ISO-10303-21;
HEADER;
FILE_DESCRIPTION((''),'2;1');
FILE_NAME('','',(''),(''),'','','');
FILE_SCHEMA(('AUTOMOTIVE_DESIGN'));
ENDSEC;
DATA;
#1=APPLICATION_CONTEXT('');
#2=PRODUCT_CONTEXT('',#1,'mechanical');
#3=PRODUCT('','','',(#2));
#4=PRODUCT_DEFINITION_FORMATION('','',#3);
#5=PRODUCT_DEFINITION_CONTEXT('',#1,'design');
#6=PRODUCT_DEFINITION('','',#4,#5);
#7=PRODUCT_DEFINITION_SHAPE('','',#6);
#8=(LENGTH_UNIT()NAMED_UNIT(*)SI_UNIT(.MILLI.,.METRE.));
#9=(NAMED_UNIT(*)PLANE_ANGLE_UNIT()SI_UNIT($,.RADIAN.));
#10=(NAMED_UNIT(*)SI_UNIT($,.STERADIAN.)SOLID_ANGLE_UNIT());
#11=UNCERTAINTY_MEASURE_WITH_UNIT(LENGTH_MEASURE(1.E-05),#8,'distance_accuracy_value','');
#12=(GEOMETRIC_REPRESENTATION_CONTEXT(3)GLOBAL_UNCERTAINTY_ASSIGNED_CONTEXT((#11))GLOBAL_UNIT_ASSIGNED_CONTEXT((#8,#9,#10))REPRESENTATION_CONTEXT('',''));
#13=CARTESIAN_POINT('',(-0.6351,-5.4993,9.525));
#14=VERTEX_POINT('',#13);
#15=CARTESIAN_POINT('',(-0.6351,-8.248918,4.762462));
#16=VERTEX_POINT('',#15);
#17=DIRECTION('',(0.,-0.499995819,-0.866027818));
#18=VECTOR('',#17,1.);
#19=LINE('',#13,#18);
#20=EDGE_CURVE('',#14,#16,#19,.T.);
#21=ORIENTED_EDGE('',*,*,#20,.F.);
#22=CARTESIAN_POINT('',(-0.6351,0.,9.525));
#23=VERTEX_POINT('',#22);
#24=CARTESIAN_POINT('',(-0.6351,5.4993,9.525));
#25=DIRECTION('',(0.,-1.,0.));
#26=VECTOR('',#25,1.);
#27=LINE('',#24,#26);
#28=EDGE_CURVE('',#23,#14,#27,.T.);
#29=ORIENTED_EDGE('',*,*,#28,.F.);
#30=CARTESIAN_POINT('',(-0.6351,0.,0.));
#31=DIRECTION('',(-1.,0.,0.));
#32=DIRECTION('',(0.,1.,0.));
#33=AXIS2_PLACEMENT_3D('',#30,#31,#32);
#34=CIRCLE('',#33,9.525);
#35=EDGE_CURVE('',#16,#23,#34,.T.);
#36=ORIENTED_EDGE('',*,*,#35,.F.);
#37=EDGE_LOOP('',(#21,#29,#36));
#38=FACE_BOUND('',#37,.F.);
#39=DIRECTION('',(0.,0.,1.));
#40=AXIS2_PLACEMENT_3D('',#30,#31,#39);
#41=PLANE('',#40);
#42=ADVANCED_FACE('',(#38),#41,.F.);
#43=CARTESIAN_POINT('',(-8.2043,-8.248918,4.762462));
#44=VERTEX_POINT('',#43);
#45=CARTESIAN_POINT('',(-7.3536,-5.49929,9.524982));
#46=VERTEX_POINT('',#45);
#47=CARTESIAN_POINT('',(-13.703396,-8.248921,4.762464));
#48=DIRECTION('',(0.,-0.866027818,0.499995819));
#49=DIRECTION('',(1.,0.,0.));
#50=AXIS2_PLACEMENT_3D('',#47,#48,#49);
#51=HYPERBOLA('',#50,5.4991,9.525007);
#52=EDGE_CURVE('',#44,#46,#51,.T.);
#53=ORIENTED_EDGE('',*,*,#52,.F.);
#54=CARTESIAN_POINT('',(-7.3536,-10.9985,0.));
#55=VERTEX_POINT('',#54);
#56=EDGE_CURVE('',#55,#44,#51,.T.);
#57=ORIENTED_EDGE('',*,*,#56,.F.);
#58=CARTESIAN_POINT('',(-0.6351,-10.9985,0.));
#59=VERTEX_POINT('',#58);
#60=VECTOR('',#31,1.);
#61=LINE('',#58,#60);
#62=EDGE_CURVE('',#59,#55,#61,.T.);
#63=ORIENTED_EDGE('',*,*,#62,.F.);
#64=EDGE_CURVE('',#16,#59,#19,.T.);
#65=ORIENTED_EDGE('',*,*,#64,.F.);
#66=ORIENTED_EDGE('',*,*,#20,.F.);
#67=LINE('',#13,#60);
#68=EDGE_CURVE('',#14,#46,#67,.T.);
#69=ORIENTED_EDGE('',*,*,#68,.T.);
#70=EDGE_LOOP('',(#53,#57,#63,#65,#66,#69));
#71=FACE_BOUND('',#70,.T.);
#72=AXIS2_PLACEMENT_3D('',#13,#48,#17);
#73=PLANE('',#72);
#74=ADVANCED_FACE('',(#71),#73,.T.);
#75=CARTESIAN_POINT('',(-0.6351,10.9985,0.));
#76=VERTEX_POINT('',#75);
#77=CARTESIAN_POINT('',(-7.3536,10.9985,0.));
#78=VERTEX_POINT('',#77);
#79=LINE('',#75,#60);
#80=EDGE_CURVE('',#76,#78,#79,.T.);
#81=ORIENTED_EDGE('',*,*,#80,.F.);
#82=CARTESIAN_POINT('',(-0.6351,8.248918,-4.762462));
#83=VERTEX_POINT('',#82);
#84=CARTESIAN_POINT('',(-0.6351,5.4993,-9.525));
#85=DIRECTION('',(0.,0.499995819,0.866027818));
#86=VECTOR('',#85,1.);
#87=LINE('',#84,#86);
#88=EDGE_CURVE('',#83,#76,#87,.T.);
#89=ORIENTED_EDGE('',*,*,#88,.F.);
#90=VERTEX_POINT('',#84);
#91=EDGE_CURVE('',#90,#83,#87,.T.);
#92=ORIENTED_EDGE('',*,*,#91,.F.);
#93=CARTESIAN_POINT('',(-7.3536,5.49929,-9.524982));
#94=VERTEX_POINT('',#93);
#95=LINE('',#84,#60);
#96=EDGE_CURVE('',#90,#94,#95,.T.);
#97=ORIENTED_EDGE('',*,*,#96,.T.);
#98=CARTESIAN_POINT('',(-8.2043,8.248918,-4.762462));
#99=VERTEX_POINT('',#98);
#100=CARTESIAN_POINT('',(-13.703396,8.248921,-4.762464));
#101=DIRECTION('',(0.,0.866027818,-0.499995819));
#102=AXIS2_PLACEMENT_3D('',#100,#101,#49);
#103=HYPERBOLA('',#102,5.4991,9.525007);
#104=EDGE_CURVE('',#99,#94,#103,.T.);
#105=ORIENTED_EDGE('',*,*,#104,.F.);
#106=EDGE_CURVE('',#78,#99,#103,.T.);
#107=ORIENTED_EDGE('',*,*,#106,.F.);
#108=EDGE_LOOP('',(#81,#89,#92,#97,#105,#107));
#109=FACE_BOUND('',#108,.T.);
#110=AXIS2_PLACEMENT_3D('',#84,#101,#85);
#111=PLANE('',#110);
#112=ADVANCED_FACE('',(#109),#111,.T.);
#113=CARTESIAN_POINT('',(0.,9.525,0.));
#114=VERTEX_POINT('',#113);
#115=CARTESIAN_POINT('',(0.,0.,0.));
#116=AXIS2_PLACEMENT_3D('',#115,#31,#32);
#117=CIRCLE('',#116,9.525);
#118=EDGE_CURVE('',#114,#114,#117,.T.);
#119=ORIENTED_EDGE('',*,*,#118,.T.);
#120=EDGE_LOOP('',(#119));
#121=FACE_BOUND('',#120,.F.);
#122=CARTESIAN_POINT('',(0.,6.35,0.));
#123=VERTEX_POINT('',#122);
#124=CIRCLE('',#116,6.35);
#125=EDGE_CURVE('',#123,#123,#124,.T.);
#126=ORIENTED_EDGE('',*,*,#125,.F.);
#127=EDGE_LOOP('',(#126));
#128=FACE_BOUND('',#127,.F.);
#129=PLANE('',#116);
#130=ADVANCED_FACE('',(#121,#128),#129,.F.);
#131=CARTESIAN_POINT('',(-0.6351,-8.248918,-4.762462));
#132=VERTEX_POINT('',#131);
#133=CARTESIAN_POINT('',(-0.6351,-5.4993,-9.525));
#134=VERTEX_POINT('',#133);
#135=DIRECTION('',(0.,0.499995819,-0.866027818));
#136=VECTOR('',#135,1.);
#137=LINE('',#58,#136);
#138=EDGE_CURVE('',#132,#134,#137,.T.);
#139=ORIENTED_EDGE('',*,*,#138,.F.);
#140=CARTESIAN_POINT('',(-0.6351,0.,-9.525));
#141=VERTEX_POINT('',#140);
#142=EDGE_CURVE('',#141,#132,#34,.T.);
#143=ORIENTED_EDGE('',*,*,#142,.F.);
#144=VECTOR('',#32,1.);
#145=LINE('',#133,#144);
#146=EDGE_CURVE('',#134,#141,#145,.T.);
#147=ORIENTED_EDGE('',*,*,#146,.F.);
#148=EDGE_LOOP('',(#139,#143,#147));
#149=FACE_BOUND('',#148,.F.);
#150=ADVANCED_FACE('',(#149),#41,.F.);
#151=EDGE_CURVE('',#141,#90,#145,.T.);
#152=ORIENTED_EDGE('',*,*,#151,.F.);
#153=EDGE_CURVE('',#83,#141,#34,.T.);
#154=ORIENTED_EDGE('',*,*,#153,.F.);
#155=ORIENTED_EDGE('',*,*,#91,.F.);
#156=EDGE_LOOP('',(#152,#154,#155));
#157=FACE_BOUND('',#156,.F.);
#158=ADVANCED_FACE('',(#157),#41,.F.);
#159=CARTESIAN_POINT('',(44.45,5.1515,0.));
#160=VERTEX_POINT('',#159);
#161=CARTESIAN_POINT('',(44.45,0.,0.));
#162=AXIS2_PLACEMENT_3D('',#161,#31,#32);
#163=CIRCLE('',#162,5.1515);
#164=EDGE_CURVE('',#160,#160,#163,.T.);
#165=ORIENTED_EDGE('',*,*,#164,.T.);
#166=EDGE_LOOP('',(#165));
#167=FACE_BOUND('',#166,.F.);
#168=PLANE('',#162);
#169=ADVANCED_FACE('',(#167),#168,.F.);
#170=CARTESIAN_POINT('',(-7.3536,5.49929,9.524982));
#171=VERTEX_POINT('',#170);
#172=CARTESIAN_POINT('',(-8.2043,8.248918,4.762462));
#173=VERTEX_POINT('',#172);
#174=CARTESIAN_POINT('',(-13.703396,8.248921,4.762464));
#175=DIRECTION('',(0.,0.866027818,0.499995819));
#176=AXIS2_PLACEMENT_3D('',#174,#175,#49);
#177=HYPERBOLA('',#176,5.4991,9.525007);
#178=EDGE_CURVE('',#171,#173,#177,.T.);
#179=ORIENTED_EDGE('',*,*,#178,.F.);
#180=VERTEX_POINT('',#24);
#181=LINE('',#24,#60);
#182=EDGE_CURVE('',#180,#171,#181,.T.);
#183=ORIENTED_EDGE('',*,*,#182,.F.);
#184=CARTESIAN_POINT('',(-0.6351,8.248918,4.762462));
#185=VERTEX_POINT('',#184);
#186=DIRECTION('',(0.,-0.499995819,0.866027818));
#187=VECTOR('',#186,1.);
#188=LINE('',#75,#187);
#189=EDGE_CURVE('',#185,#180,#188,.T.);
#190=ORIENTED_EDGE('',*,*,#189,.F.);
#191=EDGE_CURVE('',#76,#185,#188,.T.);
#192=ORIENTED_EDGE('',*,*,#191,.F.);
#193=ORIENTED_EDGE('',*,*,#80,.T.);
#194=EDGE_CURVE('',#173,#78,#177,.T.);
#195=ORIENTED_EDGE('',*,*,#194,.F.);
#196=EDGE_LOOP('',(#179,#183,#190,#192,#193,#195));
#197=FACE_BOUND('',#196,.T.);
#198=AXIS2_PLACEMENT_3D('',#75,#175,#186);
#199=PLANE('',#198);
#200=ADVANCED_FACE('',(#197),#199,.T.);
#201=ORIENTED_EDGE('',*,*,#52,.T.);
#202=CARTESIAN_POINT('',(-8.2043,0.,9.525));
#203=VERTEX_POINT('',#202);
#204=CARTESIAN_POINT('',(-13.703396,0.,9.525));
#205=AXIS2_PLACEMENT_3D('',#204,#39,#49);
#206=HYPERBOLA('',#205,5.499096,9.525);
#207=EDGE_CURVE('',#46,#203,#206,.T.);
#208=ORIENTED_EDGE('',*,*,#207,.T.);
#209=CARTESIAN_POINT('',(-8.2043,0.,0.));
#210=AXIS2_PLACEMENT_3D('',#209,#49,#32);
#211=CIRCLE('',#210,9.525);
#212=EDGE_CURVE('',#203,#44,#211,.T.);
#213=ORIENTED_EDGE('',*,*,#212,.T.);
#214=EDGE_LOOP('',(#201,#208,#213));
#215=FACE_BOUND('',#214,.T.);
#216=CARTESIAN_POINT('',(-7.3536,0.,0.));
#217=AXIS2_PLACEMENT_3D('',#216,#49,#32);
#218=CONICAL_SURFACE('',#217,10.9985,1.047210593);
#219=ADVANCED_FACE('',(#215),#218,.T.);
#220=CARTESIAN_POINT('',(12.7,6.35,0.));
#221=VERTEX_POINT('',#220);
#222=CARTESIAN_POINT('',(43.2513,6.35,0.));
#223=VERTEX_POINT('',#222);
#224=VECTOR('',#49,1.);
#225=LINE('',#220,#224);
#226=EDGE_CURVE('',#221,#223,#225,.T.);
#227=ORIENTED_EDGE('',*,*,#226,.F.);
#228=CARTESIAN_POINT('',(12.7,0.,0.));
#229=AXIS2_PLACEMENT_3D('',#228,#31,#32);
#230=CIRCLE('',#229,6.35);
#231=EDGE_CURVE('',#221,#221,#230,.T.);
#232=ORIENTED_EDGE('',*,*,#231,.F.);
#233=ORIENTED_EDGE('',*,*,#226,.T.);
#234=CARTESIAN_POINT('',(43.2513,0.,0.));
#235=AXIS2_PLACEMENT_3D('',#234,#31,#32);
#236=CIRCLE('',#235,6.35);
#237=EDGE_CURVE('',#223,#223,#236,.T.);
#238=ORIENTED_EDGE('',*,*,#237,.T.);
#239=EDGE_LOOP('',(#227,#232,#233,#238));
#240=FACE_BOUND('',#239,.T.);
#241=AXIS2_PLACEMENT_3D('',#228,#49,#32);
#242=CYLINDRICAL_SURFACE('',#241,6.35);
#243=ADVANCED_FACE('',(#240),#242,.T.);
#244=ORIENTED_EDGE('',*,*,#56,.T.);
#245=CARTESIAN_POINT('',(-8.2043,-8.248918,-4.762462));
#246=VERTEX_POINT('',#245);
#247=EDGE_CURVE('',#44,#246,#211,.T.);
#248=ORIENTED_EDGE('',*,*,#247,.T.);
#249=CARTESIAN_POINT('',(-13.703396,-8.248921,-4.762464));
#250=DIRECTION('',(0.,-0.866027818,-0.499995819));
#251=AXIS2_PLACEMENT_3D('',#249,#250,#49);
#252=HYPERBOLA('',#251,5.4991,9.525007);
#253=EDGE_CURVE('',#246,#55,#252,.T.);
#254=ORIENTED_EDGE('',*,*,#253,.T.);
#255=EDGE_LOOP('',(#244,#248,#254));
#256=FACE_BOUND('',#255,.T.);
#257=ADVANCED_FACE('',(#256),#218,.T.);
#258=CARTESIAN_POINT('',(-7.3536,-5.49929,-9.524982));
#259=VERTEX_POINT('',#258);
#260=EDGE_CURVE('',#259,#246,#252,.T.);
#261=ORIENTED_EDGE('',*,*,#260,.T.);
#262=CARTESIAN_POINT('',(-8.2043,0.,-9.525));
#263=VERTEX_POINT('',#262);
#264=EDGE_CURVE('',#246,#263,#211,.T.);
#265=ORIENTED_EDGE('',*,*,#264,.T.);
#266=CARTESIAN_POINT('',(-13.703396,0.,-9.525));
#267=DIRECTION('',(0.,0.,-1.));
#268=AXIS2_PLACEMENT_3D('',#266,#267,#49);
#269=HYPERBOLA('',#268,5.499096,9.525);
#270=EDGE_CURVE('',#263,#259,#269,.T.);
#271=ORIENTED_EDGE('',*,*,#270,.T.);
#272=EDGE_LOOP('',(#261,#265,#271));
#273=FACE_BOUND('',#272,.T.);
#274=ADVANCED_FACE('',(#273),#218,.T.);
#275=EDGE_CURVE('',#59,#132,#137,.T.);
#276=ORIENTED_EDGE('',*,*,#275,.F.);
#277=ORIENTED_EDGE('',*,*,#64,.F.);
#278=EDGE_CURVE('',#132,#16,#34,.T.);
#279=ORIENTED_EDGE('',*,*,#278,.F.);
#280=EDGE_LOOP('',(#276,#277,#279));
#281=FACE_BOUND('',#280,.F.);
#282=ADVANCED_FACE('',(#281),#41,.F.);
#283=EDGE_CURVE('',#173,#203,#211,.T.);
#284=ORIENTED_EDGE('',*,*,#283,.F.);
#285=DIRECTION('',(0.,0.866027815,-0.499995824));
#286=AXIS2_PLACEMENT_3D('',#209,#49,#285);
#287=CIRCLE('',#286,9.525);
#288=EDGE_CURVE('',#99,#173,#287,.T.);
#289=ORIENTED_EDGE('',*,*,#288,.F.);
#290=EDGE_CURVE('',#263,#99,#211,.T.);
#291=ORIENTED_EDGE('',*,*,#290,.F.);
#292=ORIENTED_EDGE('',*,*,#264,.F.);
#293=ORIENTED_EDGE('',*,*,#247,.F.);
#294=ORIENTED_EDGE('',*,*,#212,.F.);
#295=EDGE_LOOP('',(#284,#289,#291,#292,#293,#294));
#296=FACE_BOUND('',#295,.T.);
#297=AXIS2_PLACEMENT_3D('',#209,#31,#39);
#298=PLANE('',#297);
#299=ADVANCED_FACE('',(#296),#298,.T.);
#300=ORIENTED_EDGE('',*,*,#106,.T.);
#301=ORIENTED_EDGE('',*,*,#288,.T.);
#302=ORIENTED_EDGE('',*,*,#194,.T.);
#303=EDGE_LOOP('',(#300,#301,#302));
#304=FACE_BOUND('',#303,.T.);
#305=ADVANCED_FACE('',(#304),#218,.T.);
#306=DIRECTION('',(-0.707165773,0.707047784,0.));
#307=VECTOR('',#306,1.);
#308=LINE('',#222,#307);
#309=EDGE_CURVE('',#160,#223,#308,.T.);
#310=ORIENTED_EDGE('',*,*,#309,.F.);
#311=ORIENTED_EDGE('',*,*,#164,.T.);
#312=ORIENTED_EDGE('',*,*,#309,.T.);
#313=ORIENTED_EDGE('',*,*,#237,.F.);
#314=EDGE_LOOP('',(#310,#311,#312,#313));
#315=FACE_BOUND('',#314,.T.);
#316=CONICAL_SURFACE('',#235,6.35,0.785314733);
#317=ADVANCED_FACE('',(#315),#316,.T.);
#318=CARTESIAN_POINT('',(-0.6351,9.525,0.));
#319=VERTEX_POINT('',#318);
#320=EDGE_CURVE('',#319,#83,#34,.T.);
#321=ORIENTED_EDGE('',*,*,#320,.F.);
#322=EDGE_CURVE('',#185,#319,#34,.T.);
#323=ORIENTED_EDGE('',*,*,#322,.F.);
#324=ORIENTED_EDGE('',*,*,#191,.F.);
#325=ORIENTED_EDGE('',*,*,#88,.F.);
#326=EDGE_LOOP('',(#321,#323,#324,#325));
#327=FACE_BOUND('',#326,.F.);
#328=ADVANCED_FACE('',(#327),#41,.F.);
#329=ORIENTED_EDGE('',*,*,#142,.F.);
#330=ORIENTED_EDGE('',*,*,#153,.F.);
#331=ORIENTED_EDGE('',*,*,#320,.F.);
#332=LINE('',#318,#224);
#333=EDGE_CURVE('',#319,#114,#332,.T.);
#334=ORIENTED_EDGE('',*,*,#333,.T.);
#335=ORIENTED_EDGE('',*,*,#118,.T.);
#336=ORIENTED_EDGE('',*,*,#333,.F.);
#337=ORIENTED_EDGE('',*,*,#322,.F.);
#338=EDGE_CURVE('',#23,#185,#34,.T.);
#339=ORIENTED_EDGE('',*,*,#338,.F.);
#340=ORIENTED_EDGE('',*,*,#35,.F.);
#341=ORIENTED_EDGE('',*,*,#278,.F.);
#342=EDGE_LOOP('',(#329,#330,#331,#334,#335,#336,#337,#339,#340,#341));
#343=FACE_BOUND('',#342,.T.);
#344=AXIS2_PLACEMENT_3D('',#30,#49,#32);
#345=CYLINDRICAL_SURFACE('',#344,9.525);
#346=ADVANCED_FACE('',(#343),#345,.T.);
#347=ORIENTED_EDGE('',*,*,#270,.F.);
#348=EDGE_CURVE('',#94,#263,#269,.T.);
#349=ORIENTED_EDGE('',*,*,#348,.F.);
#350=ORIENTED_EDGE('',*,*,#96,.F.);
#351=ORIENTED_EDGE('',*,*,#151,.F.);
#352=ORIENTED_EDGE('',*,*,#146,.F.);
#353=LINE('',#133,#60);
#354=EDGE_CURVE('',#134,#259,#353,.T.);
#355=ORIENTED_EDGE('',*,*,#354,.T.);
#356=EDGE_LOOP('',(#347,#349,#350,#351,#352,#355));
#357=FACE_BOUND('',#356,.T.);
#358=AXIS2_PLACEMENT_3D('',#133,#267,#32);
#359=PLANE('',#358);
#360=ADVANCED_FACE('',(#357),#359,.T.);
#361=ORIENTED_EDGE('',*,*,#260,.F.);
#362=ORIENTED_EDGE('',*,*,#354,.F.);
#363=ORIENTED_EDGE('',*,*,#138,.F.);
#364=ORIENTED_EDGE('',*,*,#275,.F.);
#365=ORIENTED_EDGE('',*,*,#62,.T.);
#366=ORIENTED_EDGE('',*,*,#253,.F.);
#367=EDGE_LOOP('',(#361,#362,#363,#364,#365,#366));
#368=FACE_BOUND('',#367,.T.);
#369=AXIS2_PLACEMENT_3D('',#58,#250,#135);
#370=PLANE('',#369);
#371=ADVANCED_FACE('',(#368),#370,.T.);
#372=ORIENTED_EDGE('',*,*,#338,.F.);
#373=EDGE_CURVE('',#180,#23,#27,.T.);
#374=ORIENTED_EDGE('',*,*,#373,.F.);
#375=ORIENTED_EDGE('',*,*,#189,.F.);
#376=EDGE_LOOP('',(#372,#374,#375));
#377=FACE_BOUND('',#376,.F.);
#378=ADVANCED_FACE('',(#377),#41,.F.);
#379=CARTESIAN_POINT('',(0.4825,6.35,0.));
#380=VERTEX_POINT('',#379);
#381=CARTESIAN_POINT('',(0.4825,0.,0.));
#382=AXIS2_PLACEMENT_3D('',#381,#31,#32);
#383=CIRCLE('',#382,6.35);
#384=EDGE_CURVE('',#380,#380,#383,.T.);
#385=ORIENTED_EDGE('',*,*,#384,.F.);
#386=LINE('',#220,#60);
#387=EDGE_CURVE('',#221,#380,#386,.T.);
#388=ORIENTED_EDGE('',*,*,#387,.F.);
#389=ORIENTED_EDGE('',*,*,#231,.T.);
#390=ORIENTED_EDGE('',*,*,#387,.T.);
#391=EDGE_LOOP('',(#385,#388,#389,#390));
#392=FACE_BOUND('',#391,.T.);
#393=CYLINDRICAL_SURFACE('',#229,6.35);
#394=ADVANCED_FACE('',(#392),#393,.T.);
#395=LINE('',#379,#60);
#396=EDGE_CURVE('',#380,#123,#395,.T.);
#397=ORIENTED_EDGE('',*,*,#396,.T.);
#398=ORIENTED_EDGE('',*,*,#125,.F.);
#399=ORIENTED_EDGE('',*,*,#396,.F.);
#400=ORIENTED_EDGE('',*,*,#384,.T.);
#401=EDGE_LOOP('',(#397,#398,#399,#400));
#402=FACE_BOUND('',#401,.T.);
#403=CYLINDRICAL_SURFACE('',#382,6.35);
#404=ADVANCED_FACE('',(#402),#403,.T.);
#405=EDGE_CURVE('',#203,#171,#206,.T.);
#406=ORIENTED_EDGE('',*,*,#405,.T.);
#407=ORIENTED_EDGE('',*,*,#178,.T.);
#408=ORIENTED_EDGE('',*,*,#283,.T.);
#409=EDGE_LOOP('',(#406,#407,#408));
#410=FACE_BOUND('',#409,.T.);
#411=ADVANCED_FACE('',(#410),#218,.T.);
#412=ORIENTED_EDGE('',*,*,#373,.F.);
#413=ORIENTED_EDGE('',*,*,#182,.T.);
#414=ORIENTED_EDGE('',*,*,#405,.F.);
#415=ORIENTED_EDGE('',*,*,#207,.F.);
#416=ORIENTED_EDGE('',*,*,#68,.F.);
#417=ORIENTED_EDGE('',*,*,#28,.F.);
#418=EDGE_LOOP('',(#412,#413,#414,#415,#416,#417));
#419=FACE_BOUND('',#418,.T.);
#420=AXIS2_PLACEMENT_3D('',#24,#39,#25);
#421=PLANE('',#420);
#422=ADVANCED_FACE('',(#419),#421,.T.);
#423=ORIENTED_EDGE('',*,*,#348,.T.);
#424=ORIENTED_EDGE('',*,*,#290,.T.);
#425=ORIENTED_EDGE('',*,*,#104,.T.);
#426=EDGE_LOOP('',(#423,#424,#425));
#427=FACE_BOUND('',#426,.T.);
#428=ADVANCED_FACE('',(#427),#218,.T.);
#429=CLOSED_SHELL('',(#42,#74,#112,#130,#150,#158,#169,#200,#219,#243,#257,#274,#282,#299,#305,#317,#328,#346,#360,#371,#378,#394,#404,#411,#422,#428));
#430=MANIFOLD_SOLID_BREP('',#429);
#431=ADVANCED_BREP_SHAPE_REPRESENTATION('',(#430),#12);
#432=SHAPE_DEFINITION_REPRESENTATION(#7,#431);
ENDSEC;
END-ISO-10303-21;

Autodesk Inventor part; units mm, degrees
ref_plane "YZ Plane" through (0, 0, 0) normal (1, 0, 0) x (0, 1, 0)
ref_plane "XZ Plane" through (0, 0, 0) normal (0, 1, 0) x (-1, 0, 0)
sketch "Sketch1" plane through (0, 0, 0) normal (0, 0, 1) x (1, 0, 0)
  line L0 (0, 9.525) -> (0, 6.35)
  line L1 (12.7, 6.35) -> (44.45, 6.35)
  line L2 (44.45, 6.35) -> (44.45, 0)
  line L3 (44.45, 0) -> (-0.6351, 0)
  line L4 (-9.6521, 0) -> (53.467, 0) projected
  line L5 (-0.6351, 0) -> (-0.6351, 9.525)
  line L6 (-0.6351, 9.525) -> (0, 9.525)
  line L7 (12.7, 6.35) -> (0.4825, 6.35)
  line L8 (0.4825, 6.35) -> (0, 6.35)
  line L9 (0, -1.905) -> (0, 11.43) projected
  dimension "d0" = 44.45
  dimension "d1" = 31.75
  dimension "d2" = 12.7
  dimension "d9" = 0.6351
  dimension "d10" = 19.05
  dimension "d13" = 12.2175
  dimension "d14" = 12.7
revolve "Body" add sketch "Sketch1" angle 360 about axis through (44.45, 0, 0) along (-1, 0, 0)
sketch "Sketch2" plane through (-0.6351, 0, 0) normal (-1, 0, 0) x (0, 0, 1)
  line L0 (0, 10.9985) -> (9.525, 5.4993)
  line L1 (9.525, 5.4993) -> (9.525, -5.4993)
  line L2 (9.525, -5.4993) -> (0, -10.9985)
  line L3 (0, -10.9985) -> (-9.525, -5.4993)
  line L4 (-9.525, -5.4993) -> (-9.525, 5.4993)
  line L5 (-9.525, 5.4993) -> (0, 10.9985)
  point P0 (0, 0)
  point P1 (0, 0)
  dimension "d11" = 19.05
extrude "Head" add sketch "Sketch2" along normal blind 7.5692
sketch "Sketch4" plane through (0, 0, 0) normal (0, 0, 1) x (1, 0, 0)
  line L0 (-8.2043, 9.525) -> (-8.2043, 10.9985)
  line L1 (-8.2043, 10.9985) -> (-7.3536, 10.9985)
  line L2 (-7.3536, 10.9985) -> (-8.2043, 9.525)
  line L3 (-9.7181, 0) -> (0.8787, 0) projected
  line L4 (-0.6351, 10.9985) -> (-8.2043, 10.9985) projected
  line L5 (-8.2043, 5.4993) -> (-8.2043, 10.9985) projected
  dimension "d5" = 30
  dimension "d19" = 19.05
revolve "Chamfer1" cut sketch "Sketch4" angle 360 about axis through (-10, 0, 0) along (1, 0, 0)
thread "Thread" size "1/2-13 UNC" class "2A" standard "ANSI Unified Screw Threads" length 31.75
chamfer "Chamfer2" distance 1.1985 distance2 1.1987 1 edges at (44.45, -6.35, 0) measured on face at (44.45, -0.7506, -0.8281)
ref_plane "Work Plane1" through (1.525, 0, 0) normal (0, 0, 1) x (1, 0, 0)
equation "\"d0\" = NLG"
equation "\"d1\" = GEL"
equation "\"d2\" = GD"
equation "\"d10\" = SD2"
equation "\"d14\" = BDM"
equation "\"d11\" = SW"
equation "\"d3\" = KOH - SD"
equation "\"d5\" = ANG1"
equation "\"d19\" = SW0"
equation "\"d15\" = GEL"
equation "\"d6\" = -0.5 * SPD + 0.5 * GD"
equation "\"NLG\" = 44.45"
equation "\"GD\" = 12.7"
equation "\"BDM\" = 12.7"
equation "\"KOH\" = 8.2042"
equation "\"GEL\" = 31.75"
equation "\"SW\" = 19.05"
equation "\"SW0\" = SW"
equation "\"SPD\" = GD1"
equation "\"SD2\" = SW"
equation "\"SD\" = 0.635"
equation "\"ANG1\" = 30deg"
equation "\"GAL\" = 12.2174"
equation "\"GUL\" = 1.19863"
equation "\"RR\" = 0.381"
equation "\"WFT\" = SD"
equation "\"GD1\" = 10.303"
equation "\"THREADDIA\" = 12.7"
equation "\"SDH\" = SW"
equation "\"SDHG\" = 0.4826"
equation "\"TOA\" = 30deg"
equation "\"FAWI\" = 45deg"
equation "\"NND\" = 12.7"
equation "\"E0\" = 22.00275"
properties part number "AS 2465 - 1/2 x 1 3/4  UNC" material "Steel, Mild"
